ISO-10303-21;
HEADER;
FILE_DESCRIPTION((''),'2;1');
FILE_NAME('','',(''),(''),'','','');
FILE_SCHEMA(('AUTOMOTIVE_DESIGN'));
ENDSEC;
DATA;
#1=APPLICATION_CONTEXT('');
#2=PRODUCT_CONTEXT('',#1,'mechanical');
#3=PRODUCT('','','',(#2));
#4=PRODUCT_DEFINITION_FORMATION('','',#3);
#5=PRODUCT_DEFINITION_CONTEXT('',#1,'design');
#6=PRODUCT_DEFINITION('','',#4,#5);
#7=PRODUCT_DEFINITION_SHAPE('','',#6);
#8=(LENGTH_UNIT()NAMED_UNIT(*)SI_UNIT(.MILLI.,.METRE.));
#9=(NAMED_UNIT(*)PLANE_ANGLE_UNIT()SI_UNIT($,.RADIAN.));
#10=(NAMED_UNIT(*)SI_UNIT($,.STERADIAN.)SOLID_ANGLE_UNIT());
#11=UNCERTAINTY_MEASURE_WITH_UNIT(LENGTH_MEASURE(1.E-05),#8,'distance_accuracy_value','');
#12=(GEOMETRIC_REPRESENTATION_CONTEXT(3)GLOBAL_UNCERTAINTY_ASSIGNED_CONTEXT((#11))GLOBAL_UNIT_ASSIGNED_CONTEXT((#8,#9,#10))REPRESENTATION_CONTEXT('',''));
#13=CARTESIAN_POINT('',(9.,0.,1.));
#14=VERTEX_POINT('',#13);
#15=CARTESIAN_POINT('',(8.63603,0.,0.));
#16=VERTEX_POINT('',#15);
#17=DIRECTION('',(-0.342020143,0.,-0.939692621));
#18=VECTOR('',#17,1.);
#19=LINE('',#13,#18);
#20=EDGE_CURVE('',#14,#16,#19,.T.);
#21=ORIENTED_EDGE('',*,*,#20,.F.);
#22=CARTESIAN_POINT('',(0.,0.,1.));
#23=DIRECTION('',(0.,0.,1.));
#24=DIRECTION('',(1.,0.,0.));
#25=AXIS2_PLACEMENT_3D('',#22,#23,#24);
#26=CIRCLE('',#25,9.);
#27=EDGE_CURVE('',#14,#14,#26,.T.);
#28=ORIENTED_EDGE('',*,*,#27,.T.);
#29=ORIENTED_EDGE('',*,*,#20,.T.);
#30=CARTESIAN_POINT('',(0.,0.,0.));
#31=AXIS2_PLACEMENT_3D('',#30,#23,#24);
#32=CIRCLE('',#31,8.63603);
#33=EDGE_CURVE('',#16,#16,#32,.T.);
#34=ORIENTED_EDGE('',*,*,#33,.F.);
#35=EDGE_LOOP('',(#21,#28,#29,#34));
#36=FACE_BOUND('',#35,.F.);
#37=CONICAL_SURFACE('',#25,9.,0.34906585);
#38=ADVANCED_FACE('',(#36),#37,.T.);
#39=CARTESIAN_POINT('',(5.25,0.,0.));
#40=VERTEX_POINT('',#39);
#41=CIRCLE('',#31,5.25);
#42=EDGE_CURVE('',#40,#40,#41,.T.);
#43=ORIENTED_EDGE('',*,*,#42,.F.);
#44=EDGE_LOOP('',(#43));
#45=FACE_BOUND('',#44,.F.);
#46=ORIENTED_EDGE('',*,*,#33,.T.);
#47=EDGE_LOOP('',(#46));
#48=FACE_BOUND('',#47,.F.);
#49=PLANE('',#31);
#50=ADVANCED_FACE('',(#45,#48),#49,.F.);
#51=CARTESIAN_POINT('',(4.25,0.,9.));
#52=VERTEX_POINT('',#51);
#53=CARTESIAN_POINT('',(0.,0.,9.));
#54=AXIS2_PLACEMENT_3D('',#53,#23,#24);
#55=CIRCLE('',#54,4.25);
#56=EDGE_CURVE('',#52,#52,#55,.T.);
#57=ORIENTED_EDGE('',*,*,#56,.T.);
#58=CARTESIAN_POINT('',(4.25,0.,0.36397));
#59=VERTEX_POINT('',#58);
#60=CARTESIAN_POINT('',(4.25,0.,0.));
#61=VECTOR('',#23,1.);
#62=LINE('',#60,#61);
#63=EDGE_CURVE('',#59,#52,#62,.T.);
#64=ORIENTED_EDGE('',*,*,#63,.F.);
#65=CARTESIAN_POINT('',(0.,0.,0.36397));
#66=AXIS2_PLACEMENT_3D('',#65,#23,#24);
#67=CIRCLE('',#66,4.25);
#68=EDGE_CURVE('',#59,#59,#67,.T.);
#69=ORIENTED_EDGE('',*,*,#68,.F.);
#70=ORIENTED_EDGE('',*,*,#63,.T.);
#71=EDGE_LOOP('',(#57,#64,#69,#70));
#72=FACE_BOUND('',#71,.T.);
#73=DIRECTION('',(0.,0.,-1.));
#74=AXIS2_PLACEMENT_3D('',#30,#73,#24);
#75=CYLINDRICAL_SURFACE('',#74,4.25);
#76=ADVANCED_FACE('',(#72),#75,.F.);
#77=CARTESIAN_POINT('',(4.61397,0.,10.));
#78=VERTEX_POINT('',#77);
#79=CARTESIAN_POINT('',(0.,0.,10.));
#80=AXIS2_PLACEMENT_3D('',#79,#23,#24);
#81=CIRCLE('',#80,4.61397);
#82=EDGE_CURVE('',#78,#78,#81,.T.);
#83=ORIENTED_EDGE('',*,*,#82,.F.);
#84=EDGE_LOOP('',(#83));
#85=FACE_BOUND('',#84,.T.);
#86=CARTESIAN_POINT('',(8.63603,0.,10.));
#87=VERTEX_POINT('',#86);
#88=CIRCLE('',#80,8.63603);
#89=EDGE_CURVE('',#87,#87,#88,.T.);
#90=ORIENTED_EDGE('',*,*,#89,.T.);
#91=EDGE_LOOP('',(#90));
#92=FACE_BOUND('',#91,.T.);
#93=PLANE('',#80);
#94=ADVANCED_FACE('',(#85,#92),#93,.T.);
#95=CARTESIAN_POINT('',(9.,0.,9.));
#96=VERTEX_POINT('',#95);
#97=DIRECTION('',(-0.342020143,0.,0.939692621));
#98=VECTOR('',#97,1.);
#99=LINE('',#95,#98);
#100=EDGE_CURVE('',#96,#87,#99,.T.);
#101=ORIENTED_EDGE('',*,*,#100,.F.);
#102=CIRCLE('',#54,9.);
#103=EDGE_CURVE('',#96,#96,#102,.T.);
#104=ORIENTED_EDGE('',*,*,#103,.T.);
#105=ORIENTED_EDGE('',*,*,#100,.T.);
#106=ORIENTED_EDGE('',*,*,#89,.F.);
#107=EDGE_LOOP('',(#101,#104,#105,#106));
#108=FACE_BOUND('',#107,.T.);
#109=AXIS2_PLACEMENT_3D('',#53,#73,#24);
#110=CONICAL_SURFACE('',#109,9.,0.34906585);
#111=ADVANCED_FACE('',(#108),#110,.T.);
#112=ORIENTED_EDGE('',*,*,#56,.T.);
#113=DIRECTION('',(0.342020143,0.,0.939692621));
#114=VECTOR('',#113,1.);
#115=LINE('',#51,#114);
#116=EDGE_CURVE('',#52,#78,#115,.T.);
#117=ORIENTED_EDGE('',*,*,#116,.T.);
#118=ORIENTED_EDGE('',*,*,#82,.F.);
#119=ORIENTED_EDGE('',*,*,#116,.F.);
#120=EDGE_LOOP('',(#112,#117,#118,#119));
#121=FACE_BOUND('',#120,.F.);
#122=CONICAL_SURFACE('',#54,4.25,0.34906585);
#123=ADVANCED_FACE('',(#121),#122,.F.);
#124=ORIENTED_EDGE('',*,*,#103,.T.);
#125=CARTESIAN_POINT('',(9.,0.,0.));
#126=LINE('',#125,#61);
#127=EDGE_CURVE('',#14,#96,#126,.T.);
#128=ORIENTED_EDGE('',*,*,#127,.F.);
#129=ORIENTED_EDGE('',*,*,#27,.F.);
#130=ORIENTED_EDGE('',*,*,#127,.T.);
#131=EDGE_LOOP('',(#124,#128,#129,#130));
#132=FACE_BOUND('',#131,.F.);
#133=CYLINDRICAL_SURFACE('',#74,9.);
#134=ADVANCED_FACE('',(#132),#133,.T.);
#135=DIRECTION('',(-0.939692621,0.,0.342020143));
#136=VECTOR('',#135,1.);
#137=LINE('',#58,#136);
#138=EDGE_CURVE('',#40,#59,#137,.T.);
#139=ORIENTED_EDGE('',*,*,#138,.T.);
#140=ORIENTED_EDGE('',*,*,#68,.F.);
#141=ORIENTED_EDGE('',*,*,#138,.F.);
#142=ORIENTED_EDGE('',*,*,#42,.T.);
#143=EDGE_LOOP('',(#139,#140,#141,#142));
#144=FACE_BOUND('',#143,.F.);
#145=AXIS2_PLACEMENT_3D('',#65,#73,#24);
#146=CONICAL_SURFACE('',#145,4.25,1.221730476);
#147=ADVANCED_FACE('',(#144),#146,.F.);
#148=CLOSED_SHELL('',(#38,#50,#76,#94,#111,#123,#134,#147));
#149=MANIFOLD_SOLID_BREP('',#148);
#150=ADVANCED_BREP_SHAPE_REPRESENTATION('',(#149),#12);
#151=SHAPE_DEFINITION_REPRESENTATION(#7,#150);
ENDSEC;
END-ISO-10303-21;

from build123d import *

# Parameters (mm, degrees)
F0_R     = 9
F0_R_2   = 4.25
F1_DEPTH = 10
F2_SIZE2 = 0.3639702343
F2_SIZE  = 1
F3_SIZE2 = 0.3639702343
F3_SIZE  = 1
F4_SIZE2 = 0.3639702343
F4_SIZE  = 1
F5_SIZE2 = 0.3639702343
F5_SIZE  = 1


with BuildPart() as f1:
    # F0 (on Top) → F1 (new body)
    with BuildSketch(Plane.XY):
        Circle(F0_R)
        Circle(F0_R_2, mode=Mode.SUBTRACT)
    extrude(amount=F1_DEPTH)

    # F2
    f2_edges = [f1.edges().sort_by_distance(p)[0] for p in [
        (-4.25, 0, 10),
    ]]
    f2_side = f1.faces().sort_by_distance((-4.25, 0, 5))[0]
    chamfer(f2_edges, length=F2_SIZE, length2=F2_SIZE2, reference=f2_side)

    # F3
    f3_edges = [f1.edges().sort_by_distance(p)[0] for p in [
        (-9, 0, 10),
    ]]
    f3_side = f1.faces().sort_by_distance((-9, 0, 5))[0]
    chamfer(f3_edges, length=F3_SIZE, length2=F3_SIZE2, reference=f3_side)

    # F4
    f4_edges = [f1.edges().sort_by_distance(p)[0] for p in [
        (-9, 0, 0),
    ]]
    f4_side = f1.faces().sort_by_distance((-9, 0, 4.5))[0]
    chamfer(f4_edges, length=F4_SIZE, length2=F4_SIZE2, reference=f4_side)

    # F5
    f5_edges = [f1.edges().sort_by_distance(p)[0] for p in [
        (-4.25, 0, 0),
    ]]
    f5_side = f1.faces().sort_by_distance((-8.391766, 0, 0))[0]
    chamfer(f5_edges, length=F5_SIZE, length2=F5_SIZE2, reference=f5_side)


solid = f1.part
